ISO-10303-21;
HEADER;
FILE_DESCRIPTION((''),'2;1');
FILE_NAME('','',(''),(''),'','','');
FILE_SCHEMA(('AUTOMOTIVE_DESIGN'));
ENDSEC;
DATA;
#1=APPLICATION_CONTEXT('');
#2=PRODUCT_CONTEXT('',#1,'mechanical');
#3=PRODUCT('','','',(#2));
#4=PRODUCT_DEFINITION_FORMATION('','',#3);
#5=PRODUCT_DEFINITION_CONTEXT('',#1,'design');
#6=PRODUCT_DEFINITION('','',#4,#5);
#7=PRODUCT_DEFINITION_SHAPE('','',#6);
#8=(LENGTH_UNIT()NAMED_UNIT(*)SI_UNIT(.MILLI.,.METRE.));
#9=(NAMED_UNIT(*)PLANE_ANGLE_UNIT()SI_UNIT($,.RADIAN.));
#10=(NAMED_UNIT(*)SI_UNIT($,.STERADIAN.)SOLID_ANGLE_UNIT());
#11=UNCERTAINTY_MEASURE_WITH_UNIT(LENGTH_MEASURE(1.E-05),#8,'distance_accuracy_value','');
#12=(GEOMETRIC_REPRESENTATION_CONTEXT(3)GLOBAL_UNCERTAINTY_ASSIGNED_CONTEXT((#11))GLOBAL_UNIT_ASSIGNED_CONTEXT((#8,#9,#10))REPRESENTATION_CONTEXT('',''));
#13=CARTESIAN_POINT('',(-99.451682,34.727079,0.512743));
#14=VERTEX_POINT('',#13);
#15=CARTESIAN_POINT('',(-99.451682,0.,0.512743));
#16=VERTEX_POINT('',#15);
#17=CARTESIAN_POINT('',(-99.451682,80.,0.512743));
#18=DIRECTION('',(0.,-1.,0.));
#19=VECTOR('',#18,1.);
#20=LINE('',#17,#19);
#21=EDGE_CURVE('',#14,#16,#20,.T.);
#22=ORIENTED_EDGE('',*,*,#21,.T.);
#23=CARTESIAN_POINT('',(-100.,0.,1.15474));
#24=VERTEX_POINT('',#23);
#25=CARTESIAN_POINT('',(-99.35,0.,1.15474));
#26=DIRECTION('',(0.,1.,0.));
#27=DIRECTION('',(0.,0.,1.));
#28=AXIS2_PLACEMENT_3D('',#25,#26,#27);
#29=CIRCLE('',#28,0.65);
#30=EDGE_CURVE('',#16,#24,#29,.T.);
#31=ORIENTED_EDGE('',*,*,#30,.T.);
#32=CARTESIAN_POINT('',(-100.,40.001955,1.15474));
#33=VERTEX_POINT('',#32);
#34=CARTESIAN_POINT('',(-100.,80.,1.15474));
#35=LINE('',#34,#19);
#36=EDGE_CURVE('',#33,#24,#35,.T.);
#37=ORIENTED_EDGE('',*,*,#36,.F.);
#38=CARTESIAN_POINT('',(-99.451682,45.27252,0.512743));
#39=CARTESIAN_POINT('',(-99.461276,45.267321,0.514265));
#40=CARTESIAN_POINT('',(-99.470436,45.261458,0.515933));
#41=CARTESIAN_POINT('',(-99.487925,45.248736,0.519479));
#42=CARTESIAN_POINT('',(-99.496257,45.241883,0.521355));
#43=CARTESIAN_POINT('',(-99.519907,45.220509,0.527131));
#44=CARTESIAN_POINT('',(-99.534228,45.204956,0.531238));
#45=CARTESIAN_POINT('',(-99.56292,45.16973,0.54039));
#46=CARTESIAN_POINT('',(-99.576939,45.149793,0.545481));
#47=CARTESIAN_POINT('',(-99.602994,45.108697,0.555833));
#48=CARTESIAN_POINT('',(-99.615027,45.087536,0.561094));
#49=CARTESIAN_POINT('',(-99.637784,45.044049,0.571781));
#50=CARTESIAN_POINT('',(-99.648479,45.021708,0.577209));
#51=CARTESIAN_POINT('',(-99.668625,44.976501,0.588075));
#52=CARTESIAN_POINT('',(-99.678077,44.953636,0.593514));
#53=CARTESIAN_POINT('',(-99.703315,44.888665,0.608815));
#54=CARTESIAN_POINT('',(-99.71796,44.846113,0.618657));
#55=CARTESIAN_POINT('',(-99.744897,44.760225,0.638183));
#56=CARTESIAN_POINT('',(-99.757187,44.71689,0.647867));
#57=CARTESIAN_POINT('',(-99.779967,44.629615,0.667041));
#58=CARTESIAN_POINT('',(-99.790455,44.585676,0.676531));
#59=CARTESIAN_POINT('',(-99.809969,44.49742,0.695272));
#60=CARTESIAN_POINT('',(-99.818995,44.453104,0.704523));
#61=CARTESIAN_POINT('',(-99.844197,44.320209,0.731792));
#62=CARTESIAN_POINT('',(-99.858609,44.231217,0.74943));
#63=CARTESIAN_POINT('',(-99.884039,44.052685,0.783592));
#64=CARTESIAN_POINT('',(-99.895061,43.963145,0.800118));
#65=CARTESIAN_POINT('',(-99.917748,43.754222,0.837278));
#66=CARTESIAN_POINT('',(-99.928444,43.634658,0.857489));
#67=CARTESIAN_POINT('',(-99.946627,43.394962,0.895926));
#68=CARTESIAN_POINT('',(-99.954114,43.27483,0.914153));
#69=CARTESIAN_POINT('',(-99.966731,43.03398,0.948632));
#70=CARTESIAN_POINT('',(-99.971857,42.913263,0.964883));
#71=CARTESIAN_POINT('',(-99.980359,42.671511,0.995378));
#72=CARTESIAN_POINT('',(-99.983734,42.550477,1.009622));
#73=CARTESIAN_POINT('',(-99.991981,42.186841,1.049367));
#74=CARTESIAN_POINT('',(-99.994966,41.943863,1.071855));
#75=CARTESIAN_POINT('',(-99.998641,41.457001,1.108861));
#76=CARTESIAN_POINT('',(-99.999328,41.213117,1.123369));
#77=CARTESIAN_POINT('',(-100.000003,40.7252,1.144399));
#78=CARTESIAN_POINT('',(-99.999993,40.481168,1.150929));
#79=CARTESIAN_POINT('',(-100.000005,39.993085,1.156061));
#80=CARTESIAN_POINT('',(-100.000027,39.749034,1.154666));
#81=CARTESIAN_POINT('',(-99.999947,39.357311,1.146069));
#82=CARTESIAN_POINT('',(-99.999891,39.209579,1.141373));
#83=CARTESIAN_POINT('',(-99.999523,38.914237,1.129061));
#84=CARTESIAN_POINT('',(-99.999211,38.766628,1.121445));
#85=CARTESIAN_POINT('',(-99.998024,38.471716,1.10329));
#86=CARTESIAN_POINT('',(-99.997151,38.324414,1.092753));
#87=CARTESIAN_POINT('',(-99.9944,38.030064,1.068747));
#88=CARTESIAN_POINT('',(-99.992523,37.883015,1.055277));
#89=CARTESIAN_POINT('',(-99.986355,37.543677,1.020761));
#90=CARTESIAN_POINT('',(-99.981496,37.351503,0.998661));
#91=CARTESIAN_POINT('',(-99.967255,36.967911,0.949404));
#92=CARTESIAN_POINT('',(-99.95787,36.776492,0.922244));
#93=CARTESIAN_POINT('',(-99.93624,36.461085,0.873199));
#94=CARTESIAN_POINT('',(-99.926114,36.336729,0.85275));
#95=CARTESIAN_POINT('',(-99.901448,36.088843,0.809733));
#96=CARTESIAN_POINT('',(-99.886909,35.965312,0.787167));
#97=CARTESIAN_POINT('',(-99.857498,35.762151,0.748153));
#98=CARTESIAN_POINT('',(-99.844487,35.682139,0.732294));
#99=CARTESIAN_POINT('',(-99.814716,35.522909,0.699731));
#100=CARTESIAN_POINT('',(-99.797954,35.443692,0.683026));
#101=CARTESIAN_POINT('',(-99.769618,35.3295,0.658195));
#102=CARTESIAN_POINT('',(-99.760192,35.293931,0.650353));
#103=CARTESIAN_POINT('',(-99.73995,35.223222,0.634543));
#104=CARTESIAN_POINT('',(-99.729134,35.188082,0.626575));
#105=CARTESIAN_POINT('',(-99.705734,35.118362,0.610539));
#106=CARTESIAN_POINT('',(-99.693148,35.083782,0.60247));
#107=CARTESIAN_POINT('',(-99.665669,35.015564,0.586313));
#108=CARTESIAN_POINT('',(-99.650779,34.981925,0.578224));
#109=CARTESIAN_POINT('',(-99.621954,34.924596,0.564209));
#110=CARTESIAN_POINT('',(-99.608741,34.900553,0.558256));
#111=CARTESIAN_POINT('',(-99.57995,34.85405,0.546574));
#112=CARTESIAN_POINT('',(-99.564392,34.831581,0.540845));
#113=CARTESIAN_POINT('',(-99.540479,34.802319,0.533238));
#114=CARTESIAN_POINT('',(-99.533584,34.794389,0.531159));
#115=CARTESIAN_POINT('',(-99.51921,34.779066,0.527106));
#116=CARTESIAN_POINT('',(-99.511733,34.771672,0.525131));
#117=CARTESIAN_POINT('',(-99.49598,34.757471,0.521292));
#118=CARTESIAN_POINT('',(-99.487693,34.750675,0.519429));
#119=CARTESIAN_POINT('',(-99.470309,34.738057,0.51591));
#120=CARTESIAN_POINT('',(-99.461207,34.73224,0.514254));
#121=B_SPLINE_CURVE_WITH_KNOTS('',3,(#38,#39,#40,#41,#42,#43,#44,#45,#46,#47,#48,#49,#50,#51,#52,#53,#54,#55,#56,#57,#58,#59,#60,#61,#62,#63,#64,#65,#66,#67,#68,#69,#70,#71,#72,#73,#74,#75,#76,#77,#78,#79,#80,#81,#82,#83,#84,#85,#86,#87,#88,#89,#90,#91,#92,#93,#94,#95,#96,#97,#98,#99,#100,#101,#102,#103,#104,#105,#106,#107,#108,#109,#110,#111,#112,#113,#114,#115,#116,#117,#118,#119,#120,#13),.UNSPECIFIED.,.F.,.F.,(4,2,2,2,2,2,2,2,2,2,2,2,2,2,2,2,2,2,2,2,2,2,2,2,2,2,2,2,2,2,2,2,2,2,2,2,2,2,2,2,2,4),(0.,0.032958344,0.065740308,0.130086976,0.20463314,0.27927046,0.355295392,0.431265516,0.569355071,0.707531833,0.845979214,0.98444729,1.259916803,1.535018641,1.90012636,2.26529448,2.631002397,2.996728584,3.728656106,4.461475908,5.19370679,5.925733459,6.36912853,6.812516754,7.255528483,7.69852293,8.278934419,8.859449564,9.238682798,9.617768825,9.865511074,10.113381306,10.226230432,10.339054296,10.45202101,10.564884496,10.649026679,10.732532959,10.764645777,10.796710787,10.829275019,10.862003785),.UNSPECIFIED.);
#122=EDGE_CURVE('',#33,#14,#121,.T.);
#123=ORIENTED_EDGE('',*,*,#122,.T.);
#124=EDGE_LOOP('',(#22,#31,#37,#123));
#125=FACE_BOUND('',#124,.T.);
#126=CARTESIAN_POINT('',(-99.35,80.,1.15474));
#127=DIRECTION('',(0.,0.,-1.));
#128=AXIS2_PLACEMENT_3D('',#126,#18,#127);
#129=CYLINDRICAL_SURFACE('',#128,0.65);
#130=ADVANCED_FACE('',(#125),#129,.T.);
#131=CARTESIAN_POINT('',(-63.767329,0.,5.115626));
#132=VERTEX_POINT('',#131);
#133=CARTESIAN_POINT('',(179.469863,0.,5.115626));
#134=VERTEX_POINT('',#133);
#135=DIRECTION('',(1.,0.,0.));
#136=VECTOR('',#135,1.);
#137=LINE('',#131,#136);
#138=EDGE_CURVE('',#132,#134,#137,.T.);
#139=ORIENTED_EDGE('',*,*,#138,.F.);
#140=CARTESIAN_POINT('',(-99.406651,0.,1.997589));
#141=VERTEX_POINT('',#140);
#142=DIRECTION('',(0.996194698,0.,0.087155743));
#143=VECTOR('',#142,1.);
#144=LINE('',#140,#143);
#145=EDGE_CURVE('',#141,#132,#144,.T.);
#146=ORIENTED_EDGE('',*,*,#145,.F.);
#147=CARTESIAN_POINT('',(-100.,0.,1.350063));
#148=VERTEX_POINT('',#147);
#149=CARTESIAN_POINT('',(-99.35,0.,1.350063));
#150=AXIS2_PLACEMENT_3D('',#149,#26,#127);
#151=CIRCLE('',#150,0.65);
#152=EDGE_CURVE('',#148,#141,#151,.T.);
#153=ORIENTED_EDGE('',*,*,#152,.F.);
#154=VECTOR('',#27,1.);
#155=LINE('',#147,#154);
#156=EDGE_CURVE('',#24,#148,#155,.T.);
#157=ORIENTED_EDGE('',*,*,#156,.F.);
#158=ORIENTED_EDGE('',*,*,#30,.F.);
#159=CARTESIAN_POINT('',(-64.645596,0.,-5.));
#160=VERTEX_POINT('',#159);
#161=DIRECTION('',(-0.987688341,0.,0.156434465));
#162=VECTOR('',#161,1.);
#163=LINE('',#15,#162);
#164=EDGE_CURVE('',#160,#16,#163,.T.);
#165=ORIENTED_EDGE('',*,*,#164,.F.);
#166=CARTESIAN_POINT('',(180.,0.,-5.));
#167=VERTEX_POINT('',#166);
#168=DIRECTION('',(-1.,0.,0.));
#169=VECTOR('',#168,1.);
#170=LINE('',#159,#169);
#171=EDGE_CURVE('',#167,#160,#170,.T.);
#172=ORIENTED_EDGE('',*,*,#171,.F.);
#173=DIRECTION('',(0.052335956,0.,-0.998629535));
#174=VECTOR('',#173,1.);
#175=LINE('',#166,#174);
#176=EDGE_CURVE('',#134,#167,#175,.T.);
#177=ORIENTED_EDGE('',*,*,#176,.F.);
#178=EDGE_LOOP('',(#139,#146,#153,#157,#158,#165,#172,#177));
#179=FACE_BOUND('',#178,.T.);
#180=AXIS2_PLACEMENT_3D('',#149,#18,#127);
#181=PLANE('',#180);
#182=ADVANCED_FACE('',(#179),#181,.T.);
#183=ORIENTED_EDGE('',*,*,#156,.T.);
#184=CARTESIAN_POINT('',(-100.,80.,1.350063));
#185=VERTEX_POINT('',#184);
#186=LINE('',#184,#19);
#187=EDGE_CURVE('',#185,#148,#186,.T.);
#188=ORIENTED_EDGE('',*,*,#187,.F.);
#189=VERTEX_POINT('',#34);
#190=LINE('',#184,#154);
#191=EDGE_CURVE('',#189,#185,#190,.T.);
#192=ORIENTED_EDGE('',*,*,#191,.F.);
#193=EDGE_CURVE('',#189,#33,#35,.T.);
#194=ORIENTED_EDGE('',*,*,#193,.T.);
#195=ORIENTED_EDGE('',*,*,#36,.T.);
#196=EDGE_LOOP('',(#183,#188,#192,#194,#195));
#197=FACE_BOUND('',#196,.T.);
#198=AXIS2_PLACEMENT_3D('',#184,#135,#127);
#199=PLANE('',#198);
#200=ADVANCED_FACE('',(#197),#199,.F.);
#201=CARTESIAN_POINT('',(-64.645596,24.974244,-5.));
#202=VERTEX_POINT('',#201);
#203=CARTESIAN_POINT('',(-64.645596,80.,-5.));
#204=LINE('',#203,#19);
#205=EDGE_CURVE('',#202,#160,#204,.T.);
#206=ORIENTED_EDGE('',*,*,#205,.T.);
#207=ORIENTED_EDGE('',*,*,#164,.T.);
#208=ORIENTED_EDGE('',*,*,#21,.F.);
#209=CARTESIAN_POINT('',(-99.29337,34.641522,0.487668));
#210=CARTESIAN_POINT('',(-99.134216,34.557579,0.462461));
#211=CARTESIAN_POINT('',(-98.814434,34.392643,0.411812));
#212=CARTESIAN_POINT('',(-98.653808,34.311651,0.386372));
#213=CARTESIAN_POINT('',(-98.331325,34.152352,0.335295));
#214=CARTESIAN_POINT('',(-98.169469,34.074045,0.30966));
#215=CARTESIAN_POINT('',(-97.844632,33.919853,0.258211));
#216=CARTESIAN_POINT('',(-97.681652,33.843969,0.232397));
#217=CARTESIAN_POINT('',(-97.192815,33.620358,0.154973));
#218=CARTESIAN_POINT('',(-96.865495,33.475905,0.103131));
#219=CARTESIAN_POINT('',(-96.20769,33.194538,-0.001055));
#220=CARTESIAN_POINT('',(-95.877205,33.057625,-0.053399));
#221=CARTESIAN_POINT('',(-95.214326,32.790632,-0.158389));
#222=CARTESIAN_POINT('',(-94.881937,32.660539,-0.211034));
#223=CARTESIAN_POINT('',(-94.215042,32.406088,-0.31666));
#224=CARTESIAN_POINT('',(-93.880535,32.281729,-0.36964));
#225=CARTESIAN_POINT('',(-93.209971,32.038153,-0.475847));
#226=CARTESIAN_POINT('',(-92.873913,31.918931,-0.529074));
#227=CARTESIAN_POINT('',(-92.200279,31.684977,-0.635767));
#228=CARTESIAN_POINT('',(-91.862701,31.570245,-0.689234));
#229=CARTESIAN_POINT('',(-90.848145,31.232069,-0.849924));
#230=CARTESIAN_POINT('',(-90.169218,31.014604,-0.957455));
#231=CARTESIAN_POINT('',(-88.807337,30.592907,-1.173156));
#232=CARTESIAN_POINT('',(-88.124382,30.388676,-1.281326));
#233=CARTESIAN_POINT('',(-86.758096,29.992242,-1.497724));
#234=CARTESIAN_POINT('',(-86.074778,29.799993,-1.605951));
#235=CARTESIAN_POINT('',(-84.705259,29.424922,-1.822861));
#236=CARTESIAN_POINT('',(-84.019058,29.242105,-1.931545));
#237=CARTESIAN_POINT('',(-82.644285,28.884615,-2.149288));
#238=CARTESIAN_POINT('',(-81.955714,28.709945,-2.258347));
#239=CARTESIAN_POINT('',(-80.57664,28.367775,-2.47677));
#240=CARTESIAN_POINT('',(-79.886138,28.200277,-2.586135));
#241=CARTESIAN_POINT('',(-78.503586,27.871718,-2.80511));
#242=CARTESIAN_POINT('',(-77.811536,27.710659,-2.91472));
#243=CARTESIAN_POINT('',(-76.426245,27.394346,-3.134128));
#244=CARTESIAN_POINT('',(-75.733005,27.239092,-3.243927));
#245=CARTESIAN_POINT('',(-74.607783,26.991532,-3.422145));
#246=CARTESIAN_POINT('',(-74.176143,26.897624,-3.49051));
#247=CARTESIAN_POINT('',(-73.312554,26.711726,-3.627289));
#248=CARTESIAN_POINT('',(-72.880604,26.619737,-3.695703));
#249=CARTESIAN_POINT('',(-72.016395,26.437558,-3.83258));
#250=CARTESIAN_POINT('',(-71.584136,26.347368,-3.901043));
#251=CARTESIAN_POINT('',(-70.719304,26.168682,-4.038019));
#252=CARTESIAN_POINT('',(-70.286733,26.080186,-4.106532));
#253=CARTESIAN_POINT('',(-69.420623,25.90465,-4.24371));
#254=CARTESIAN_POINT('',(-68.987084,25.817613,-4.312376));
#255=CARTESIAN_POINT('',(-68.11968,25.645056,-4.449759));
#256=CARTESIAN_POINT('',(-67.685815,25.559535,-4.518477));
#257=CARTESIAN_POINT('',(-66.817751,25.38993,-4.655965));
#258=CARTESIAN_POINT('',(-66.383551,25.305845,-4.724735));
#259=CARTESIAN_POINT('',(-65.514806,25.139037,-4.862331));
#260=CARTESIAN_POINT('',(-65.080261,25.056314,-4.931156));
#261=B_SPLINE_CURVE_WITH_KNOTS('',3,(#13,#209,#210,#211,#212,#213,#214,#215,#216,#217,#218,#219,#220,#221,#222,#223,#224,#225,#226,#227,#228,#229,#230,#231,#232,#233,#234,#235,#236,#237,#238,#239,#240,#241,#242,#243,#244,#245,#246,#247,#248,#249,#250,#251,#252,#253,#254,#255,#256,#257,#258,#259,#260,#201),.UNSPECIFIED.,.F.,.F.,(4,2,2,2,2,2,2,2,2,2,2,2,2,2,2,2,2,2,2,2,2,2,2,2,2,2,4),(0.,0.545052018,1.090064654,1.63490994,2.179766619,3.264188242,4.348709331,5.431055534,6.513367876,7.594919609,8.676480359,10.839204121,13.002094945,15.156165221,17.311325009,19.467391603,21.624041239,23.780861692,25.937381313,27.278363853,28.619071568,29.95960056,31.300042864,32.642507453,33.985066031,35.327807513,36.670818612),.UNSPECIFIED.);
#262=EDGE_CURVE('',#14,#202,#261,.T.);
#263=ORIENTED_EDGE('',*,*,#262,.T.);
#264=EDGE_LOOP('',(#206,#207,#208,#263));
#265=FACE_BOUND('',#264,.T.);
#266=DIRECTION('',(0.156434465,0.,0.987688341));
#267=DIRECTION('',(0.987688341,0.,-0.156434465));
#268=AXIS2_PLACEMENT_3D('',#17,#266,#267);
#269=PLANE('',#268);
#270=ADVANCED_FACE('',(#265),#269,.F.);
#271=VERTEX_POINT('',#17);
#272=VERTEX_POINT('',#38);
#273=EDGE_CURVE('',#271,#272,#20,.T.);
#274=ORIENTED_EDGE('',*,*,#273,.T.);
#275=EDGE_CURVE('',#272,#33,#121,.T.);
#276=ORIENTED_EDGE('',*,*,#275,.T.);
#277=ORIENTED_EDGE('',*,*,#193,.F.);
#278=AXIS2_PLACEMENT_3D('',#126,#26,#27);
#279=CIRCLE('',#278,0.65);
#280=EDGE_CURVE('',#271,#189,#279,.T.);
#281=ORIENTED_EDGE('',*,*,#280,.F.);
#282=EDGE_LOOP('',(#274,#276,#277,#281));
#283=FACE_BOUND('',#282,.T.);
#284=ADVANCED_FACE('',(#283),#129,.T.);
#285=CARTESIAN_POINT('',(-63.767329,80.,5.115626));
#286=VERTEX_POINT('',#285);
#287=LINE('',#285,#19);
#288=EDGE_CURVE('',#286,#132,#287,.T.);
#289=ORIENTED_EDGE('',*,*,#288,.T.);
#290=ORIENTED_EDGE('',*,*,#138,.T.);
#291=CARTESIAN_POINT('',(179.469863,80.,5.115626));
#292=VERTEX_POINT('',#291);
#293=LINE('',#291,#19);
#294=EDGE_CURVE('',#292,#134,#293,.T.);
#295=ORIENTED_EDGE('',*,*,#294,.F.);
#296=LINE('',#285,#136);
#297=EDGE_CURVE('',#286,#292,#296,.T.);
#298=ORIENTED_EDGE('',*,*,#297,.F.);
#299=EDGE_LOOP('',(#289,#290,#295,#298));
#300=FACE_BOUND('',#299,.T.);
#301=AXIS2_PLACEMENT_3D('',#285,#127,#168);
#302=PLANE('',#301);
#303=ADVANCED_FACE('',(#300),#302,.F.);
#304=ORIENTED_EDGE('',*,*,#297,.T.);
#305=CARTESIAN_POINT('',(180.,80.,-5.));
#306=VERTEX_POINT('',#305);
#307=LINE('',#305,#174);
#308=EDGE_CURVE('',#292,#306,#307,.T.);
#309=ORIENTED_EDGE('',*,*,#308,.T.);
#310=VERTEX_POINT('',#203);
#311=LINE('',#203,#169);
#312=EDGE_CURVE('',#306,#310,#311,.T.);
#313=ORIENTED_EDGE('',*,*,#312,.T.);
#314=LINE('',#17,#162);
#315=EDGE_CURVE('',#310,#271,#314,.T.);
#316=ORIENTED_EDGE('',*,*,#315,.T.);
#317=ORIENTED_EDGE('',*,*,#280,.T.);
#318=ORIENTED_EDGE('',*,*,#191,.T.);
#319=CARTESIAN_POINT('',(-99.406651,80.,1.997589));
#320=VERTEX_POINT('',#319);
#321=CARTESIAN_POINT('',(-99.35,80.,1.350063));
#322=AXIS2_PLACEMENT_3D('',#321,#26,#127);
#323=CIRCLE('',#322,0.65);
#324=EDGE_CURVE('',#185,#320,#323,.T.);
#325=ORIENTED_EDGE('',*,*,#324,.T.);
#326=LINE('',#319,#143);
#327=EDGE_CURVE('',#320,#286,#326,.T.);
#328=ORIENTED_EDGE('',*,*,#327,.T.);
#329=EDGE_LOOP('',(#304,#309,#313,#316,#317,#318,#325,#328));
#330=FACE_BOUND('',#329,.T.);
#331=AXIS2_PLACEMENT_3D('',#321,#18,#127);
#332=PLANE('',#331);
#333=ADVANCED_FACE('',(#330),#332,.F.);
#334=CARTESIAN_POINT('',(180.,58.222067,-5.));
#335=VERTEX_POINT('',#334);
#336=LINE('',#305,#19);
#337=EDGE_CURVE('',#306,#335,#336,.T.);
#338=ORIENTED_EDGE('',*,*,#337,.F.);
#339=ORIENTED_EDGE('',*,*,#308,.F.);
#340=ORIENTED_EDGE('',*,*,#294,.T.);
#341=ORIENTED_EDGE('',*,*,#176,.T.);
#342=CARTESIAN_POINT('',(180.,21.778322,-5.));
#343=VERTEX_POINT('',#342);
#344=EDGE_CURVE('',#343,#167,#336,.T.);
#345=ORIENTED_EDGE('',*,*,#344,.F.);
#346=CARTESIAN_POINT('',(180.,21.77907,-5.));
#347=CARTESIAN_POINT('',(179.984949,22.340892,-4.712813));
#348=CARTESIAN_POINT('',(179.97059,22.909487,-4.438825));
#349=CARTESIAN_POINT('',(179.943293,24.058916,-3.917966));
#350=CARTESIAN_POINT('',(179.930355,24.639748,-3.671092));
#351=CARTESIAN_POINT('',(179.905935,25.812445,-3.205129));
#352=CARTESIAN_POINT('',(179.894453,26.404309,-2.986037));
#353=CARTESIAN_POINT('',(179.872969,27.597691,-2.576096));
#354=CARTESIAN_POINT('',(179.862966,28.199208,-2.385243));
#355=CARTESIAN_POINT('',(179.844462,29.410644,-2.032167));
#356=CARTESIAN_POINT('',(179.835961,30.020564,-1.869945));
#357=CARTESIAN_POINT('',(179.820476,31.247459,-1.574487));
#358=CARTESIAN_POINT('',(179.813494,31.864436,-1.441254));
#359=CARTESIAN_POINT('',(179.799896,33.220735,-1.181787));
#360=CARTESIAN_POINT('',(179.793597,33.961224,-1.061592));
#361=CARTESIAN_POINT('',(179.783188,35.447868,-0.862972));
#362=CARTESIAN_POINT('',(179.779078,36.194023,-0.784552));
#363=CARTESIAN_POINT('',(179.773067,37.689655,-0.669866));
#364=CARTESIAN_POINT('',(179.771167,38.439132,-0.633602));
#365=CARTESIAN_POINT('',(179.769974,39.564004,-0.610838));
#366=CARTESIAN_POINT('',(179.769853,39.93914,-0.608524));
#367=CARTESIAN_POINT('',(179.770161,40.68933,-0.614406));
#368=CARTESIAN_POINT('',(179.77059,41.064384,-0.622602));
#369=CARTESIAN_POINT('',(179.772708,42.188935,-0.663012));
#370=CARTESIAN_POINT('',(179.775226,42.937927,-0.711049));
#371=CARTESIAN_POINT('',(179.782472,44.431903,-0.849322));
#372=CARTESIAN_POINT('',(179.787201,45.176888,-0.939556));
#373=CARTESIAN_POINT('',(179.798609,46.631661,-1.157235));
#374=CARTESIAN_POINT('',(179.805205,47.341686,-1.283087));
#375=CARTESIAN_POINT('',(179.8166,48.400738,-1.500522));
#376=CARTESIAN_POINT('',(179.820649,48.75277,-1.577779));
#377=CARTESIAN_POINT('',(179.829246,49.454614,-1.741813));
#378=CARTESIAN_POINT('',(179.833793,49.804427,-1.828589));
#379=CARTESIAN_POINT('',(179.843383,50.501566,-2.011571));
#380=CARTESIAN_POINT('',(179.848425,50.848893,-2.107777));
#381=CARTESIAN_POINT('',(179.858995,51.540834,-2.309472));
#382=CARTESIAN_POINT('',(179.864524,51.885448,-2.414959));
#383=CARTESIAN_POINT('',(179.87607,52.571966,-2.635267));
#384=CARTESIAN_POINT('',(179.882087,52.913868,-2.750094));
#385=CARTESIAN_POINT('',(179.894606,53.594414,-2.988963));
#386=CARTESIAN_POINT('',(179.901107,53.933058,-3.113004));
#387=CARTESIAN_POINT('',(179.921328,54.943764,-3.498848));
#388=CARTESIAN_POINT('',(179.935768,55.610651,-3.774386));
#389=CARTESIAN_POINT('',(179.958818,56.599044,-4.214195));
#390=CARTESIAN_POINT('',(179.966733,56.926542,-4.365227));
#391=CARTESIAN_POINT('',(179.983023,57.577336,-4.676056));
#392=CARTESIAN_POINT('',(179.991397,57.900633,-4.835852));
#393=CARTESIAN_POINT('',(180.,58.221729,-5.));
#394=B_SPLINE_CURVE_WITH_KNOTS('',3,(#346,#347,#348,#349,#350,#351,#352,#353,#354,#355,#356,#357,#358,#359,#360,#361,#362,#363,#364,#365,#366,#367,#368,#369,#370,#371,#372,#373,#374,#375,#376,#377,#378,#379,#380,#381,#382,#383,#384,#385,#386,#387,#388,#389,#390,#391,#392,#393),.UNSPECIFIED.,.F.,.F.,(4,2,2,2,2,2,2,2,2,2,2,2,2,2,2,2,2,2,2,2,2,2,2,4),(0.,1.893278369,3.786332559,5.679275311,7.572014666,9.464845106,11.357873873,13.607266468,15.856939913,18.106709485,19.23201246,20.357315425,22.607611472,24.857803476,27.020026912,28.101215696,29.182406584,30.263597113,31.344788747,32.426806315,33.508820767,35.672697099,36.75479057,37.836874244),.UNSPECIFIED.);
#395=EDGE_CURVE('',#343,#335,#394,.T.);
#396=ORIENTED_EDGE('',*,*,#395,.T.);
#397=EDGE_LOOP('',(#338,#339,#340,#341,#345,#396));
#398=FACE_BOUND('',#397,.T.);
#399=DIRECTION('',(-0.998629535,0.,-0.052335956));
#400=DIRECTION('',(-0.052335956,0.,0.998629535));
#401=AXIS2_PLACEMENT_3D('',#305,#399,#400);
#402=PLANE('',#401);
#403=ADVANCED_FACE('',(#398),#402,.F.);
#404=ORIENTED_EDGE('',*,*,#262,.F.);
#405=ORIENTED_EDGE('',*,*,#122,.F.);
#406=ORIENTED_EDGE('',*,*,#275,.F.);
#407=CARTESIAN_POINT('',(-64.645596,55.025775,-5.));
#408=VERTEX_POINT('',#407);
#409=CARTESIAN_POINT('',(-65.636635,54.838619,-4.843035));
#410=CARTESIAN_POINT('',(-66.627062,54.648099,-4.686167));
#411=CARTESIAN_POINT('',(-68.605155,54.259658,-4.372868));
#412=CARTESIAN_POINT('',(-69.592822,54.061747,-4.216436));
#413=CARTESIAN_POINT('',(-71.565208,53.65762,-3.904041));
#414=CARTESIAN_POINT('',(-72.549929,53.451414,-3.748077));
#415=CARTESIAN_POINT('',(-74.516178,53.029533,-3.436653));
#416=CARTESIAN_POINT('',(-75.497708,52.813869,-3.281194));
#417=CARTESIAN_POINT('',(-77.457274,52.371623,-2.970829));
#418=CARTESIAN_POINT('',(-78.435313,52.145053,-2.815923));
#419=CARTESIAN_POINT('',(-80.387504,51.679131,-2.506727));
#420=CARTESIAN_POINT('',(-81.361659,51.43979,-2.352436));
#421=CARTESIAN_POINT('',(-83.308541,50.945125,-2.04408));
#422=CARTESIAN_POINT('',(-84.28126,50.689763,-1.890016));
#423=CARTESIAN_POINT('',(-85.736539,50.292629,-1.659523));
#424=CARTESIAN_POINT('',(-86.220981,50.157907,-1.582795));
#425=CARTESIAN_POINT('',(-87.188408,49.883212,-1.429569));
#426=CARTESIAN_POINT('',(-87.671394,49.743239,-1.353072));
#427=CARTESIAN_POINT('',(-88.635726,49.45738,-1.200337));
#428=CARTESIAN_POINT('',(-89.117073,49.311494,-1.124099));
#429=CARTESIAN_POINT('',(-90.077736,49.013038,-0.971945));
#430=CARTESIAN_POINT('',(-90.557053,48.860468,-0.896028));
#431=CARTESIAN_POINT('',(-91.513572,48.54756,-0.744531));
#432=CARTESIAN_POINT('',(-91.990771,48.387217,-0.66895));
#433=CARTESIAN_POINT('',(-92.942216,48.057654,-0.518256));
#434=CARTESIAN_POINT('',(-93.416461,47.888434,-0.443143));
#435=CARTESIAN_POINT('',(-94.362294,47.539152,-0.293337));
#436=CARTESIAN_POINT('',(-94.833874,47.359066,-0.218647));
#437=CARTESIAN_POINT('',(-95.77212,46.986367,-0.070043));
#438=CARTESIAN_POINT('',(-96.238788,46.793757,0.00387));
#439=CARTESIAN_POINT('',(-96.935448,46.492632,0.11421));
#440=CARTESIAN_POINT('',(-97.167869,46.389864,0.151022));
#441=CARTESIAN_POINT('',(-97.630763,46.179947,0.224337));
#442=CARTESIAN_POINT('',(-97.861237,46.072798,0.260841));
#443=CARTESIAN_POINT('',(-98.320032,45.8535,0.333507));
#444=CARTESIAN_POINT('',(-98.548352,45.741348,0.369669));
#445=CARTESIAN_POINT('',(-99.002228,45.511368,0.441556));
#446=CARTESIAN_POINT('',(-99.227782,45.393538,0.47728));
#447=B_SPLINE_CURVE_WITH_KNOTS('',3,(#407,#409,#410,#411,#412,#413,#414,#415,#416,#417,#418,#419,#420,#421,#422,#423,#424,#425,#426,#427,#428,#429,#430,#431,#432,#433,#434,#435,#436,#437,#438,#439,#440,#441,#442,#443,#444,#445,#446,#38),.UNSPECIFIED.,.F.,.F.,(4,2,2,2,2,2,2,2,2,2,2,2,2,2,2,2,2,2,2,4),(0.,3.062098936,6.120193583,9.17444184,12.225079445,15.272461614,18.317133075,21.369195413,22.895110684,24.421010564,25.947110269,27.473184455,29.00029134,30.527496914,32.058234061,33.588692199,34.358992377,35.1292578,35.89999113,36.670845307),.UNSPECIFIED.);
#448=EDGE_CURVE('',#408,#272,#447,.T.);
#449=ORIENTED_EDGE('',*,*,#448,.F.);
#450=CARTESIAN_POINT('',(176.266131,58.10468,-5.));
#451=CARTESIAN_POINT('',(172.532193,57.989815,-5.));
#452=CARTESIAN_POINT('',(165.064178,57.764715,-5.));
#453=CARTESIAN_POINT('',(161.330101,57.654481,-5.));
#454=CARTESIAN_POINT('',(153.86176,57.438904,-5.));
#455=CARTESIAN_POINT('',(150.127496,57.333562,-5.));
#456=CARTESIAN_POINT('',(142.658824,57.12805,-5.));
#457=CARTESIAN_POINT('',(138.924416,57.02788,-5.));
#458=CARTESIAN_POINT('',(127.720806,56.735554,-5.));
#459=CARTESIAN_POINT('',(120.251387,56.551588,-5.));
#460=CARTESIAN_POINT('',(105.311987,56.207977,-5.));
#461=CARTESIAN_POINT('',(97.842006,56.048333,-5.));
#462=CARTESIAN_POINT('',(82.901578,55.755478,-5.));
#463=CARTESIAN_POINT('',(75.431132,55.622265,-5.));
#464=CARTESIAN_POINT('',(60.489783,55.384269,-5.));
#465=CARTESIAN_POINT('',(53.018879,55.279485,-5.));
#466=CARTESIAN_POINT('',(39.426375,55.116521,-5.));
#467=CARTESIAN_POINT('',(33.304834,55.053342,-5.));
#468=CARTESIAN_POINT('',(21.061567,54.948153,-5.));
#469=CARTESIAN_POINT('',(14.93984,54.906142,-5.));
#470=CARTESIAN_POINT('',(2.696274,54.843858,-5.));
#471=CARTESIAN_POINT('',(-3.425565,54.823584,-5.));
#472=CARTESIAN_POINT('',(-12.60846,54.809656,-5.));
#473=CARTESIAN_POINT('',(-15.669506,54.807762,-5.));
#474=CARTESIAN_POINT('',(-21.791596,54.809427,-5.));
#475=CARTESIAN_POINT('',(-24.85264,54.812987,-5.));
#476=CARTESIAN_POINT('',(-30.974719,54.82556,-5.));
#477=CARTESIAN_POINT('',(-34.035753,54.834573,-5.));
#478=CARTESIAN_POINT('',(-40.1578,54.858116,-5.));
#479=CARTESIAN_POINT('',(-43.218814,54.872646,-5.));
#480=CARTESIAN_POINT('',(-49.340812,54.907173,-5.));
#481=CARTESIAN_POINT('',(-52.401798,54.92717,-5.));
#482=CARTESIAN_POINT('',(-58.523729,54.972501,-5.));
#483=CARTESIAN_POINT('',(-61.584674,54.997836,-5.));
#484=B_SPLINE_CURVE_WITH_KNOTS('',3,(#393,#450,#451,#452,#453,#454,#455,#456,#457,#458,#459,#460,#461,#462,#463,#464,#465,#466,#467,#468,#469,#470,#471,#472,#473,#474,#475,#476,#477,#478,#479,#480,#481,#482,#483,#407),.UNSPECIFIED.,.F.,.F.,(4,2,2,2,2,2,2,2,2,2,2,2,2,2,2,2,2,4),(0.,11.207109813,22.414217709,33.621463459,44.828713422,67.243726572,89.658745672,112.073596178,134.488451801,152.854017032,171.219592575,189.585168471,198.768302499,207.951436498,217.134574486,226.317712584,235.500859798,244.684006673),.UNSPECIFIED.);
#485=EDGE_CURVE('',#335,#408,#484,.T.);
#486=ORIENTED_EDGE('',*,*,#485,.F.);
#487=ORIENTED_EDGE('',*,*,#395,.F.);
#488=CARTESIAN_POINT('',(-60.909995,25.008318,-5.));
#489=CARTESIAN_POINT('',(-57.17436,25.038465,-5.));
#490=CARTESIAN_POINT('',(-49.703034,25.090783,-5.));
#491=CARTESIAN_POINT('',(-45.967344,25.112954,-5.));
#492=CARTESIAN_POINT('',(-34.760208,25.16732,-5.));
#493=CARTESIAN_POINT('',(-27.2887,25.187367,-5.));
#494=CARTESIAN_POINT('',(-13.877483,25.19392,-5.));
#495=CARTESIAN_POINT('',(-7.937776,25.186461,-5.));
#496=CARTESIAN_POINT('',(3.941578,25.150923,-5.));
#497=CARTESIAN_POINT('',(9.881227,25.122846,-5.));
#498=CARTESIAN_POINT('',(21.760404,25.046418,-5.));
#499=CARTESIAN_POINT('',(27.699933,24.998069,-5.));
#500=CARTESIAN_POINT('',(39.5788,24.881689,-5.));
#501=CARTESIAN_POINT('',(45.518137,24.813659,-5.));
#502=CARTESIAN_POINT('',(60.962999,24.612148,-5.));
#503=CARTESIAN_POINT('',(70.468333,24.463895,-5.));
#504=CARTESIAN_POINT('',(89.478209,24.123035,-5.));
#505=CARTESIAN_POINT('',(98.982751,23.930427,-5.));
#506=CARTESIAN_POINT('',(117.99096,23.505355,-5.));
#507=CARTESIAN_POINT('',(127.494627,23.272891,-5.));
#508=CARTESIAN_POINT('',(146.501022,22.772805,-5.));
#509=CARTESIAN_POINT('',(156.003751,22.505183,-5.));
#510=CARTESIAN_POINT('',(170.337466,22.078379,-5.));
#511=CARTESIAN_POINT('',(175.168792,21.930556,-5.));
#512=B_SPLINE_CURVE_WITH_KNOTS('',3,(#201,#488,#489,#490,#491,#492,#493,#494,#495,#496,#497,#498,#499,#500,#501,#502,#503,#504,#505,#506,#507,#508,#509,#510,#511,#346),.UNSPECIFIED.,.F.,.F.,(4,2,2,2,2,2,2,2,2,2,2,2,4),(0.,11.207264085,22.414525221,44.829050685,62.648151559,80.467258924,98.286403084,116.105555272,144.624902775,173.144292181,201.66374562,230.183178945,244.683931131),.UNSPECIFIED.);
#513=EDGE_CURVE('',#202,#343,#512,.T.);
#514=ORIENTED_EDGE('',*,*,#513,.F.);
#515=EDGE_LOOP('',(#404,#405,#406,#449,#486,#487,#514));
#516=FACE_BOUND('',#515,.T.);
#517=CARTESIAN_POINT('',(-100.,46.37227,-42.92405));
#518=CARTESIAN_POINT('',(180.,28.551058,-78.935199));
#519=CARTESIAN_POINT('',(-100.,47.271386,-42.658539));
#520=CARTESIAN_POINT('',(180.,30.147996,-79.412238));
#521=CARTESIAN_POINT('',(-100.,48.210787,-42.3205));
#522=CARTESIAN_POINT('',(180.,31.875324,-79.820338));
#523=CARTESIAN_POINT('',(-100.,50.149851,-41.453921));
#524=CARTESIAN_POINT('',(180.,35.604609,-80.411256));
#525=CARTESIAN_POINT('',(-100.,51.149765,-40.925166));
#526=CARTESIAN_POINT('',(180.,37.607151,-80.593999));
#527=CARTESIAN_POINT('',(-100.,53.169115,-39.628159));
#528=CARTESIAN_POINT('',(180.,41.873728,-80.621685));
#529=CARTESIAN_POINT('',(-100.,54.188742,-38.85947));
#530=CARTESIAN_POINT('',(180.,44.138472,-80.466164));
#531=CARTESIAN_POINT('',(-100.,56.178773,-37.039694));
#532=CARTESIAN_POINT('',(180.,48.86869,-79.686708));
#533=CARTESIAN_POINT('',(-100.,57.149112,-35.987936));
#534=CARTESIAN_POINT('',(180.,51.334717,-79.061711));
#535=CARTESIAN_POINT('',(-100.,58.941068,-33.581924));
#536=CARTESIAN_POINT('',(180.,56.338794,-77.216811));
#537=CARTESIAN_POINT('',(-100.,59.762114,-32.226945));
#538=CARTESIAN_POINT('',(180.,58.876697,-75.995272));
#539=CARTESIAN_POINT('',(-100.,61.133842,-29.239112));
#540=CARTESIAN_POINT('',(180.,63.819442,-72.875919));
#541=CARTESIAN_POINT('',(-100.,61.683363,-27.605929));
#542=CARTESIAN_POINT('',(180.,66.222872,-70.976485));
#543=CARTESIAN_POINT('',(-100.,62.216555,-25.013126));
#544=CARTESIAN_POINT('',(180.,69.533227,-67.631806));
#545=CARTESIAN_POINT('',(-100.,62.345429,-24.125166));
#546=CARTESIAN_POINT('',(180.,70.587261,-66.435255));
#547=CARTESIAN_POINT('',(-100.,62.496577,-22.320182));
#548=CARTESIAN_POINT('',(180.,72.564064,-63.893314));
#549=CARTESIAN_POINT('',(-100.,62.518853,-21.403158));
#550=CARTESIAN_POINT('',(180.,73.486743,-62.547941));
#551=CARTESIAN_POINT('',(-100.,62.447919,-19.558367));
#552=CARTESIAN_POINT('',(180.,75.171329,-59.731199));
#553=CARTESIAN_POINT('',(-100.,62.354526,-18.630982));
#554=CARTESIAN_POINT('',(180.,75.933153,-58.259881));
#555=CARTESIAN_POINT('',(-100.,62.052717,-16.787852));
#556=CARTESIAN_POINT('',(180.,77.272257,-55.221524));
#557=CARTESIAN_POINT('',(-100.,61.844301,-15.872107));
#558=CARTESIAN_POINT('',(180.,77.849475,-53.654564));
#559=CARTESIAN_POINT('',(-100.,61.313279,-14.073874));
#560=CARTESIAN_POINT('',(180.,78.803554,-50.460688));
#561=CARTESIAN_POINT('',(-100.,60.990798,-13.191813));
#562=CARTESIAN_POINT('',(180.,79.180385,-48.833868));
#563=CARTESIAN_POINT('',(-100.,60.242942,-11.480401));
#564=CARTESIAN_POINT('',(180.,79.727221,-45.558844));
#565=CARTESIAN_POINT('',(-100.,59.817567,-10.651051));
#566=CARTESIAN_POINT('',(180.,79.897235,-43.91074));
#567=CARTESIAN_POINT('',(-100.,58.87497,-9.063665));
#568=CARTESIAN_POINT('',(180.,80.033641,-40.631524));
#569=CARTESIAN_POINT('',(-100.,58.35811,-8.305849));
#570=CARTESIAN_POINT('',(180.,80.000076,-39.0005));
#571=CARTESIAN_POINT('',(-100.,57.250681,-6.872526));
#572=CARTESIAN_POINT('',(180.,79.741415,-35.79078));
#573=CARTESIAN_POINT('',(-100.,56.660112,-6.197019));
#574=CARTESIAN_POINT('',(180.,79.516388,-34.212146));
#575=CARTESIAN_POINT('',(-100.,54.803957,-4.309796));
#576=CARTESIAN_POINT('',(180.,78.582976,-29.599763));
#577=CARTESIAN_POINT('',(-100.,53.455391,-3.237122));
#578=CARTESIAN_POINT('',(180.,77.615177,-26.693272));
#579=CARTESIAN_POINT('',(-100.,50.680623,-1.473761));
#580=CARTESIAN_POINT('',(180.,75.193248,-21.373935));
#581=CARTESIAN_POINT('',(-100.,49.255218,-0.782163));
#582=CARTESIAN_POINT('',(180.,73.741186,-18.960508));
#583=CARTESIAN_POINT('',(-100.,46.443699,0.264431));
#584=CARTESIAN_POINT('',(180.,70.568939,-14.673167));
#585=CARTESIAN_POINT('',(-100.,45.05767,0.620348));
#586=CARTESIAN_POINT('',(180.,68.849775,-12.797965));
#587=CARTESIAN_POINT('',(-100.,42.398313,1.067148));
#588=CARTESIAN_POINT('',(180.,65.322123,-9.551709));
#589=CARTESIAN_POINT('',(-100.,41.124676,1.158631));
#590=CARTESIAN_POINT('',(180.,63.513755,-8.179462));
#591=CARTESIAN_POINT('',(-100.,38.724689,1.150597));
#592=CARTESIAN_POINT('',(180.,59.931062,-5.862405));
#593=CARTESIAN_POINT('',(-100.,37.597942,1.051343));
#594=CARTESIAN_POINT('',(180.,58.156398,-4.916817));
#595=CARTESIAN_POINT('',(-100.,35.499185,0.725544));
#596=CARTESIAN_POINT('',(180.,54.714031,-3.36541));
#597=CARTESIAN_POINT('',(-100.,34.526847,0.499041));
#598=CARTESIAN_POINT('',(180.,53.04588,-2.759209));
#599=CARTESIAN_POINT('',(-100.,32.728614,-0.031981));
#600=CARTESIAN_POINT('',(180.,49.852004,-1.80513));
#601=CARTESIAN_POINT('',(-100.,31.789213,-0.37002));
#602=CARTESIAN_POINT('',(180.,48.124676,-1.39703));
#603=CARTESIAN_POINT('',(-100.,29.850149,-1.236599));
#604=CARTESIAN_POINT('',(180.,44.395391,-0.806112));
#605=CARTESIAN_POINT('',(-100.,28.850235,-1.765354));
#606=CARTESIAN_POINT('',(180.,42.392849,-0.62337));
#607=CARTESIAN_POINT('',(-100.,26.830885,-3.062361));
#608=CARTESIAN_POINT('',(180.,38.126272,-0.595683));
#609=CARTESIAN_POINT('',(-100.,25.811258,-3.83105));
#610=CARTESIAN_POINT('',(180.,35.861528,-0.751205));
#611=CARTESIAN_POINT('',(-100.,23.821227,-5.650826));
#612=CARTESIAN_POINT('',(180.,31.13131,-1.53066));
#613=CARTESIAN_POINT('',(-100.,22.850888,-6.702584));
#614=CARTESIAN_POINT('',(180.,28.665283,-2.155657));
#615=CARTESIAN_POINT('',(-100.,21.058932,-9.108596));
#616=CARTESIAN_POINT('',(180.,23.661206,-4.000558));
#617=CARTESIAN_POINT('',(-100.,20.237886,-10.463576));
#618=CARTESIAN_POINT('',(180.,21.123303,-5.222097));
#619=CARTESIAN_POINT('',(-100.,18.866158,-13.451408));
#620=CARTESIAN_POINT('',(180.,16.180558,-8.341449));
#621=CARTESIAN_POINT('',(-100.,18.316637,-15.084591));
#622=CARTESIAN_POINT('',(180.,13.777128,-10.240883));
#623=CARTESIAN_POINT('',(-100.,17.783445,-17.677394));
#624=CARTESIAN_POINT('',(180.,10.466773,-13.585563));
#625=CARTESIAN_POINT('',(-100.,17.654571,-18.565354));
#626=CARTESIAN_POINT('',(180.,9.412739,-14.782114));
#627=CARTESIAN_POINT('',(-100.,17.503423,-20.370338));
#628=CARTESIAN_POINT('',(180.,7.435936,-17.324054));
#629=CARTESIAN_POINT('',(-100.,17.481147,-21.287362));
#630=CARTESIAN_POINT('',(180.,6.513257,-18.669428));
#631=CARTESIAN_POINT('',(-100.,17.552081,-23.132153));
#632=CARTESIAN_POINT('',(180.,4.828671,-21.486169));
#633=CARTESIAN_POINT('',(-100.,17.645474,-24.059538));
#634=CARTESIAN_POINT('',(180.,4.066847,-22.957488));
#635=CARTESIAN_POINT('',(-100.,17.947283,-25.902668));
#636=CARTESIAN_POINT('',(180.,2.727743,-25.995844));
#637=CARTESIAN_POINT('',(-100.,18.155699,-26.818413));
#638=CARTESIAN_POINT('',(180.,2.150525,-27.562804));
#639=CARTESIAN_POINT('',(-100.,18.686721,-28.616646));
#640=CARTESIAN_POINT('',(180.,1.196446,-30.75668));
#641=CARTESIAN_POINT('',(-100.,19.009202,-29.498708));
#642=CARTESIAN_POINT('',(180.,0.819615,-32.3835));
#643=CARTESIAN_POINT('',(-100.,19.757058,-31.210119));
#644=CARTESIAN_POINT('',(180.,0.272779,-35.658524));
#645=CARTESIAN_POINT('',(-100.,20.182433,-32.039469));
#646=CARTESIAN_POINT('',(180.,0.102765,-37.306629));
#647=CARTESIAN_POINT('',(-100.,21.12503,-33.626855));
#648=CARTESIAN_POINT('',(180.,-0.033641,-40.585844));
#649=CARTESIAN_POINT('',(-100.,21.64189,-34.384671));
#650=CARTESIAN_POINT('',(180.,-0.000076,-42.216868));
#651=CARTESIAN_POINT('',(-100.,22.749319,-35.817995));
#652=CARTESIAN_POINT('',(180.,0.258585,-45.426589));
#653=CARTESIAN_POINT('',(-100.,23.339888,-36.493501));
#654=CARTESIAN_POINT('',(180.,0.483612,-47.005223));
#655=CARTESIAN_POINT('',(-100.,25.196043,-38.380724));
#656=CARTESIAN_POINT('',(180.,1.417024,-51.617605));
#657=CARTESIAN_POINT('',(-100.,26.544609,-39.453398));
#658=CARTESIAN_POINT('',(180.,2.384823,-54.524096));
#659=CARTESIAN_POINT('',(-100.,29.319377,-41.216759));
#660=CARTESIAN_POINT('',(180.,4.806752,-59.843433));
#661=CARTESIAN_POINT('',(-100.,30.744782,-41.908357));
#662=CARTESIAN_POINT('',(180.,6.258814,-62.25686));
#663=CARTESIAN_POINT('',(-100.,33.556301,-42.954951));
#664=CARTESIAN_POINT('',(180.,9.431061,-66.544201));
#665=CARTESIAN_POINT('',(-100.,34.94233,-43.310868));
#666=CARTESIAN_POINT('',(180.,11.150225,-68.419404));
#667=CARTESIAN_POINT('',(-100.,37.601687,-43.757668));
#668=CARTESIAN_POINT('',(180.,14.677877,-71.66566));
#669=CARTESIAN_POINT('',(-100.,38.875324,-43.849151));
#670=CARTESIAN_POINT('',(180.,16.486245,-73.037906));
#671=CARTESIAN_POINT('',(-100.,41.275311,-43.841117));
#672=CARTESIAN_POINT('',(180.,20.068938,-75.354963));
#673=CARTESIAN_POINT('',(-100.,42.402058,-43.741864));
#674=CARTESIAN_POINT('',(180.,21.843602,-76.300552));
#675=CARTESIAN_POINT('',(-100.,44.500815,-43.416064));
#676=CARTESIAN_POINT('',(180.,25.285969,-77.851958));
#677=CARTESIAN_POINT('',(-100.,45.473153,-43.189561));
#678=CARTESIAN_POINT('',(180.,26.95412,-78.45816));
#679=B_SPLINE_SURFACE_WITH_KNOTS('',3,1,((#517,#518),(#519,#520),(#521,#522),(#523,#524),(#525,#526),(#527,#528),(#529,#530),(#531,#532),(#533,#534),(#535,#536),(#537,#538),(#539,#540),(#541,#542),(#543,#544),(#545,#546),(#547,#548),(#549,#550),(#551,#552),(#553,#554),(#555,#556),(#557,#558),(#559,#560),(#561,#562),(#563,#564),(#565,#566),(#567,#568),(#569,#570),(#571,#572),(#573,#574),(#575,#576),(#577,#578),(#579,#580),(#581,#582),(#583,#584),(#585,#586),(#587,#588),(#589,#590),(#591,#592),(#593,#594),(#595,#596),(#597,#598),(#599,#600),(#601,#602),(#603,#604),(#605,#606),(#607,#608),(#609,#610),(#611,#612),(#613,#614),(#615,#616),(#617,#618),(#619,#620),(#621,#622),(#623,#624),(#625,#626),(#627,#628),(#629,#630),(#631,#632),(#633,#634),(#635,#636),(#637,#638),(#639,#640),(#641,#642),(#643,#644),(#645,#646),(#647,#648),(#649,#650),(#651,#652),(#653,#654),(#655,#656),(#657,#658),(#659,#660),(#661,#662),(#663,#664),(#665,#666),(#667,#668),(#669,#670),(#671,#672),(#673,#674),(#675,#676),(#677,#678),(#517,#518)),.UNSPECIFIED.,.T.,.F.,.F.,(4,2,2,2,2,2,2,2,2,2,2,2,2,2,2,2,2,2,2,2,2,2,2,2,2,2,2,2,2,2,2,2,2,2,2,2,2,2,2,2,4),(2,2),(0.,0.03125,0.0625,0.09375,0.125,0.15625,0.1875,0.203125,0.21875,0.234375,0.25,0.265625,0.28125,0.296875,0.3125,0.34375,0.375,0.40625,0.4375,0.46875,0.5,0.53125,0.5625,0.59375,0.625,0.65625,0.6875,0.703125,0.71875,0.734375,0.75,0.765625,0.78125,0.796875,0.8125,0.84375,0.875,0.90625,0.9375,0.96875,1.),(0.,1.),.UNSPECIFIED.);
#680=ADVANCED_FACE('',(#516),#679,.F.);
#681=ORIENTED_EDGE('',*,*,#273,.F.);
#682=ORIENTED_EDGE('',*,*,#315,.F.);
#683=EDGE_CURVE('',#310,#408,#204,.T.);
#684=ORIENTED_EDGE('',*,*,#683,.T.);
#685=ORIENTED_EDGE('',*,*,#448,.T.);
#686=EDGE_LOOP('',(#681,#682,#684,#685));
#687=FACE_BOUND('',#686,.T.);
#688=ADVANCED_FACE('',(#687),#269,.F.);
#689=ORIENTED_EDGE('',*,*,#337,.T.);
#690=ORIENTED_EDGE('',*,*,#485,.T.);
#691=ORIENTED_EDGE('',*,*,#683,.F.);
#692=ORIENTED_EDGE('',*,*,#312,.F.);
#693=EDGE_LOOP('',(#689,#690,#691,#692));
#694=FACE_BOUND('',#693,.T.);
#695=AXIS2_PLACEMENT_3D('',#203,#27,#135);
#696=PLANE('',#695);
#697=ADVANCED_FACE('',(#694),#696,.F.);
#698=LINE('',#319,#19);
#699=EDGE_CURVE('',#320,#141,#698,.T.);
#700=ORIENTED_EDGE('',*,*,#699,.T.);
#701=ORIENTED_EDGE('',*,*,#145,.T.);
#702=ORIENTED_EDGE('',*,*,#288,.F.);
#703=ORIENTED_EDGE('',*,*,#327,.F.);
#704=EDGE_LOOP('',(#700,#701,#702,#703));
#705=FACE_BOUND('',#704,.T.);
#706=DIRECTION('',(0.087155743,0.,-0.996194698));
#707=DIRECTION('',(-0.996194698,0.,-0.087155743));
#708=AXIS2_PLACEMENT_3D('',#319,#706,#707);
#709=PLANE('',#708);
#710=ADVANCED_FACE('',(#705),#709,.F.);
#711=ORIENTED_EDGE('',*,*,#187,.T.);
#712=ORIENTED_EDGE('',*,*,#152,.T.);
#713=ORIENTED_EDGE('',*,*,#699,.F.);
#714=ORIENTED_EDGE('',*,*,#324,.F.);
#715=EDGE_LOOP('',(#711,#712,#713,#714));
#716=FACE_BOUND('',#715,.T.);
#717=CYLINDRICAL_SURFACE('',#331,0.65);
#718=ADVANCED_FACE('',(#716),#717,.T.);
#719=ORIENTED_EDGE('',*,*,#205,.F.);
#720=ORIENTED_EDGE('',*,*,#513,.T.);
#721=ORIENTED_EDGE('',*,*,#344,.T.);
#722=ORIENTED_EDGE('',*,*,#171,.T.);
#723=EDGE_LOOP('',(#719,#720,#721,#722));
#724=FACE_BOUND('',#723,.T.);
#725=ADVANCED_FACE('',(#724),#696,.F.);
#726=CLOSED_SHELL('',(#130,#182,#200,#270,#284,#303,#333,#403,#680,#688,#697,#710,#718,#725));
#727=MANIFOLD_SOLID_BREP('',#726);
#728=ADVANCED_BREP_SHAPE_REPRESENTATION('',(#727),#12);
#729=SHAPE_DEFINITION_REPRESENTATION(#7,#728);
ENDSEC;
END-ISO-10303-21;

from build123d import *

# Parameters (mm, degrees)
BOSS_EXTRUDE1_DEPTH = 80


with BuildPart() as part:
    # Sketch1 → Boss-Extrude1 (new body)
    with BuildSketch(Plane(origin=(0, 0, 0), x_dir=(1, 0, 0), z_dir=(0, 1, 0))):
        with BuildLine():
            Line((180, 5), (179.469862502, -5.115626071))
            Line((179.469862502, -5.115626071), (-63.767328769, -5.115626071))
            Line((-63.767328769, -5.115626071), (-99.406651233, -1.997589379))
            ThreePointArc((-99.406651233, -1.997589379), (-99.829230269, -1.789196461), (-100, -1.350062826))
            Line((-100, -1.350062826), (-100, -1.154739941))
            ThreePointArc((-100, -1.154739941), (-99.844263878, -0.732598709), (-99.451682402, -0.512742519))
            Line((-99.451682402, -0.512742519), (-64.645595971, 5))
            Line((-64.645595971, 5), (180, 5))
        make_face()
    extrude(amount=BOSS_EXTRUDE1_DEPTH)

    # Cut-Loft2: read off the stored shape, not the designer's step
    # Cut-Loft2: loft between two sections, ruled curve by curve
    cut_loft2_from = [
        Edge.make_bspline([(-100, 46.372269689, -42.924050086), (-100, 47.27138594, -42.658538849), (-100, 48.210787476, -42.320500231), (-100, 50.149850676, -41.453921439), (-100, 51.149765287, -40.925166444), (-100, 53.169114931, -39.628159499), (-100, 54.18874158, -38.859470423), (-100, 56.178772716, -37.039694285), (-100, 57.149111753, -35.987936251), (-100, 58.941067781, -33.581924282), (-100, 59.762113682, -32.226944596), (-100, 61.133842388, -29.23911219), (-100, 61.683362519, -27.605929091), (-100, 62.216554733, -25.013126268), (-100, 62.345428507, -24.125166051), (-100, 62.496577402, -22.320181761), (-100, 62.518852521, -21.403157688), (-100, 62.447919377, -19.558367046), (-100, 62.354526015, -18.630982172), (-100, 62.052716958, -16.78785196), (-100, 61.844301264, -15.872106621), (-100, 61.313278789, -14.073874119), (-100, 60.990797696, -13.191812573), (-100, 60.242941855, -11.480401071), (-100, 59.817567108, -10.651051116), (-100, 58.87497002, -9.063664977), (-100, 58.358110433, -8.305848706), (-100, 57.250681403, -6.872525569), (-100, 56.660111959, -6.197018701), (-100, 54.80395718, -4.309795913), (-100, 53.45539094, -3.237122381), (-100, 50.680622933, -1.473760637), (-100, 49.255217853, -0.782163442), (-100, 46.443698676, 0.264430993), (-100, 45.057669802, 0.620347796), (-100, 42.398313027, 1.067148265), (-100, 41.124675582, 1.158630823), (-100, 38.724689029, 1.150596935), (-100, 37.597941582, 1.051343402), (-100, 35.499184882, 0.725544061), (-100, 34.526846562, 0.499041204), (-100, 32.72861406, -0.03198127), (-100, 31.789212524, -0.370019888), (-100, 29.850149324, -1.23659868), (-100, 28.850234713, -1.765353674), (-100, 26.830885069, -3.062360619), (-100, 25.81125842, -3.831049696), (-100, 23.821227284, -5.650825833), (-100, 22.850888247, -6.702583867), (-100, 21.058932219, -9.108595836), (-100, 20.237886318, -10.463575522), (-100, 18.866157612, -13.451407929), (-100, 18.316637481, -15.084591028), (-100, 17.783445267, -17.677393851), (-100, 17.654571493, -18.565354067), (-100, 17.503422598, -20.370338357), (-100, 17.481147479, -21.287362431), (-100, 17.552080623, -23.132153073), (-100, 17.645473985, -24.059537946), (-100, 17.947283042, -25.902668159), (-100, 18.155698736, -26.818413497), (-100, 18.686721211, -28.616646), (-100, 19.009202304, -29.498707546), (-100, 19.757058145, -31.210119048), (-100, 20.182432892, -32.039469003), (-100, 21.12502998, -33.626855142), (-100, 21.641889567, -34.384671412), (-100, 22.749318597, -35.81799455), (-100, 23.339888041, -36.493501417), (-100, 25.19604282, -38.380724205), (-100, 26.54460906, -39.453397738), (-100, 29.319377067, -41.216759482), (-100, 30.744782147, -41.908356676), (-100, 33.556301324, -42.954951112), (-100, 34.942330198, -43.310867915), (-100, 37.601686973, -43.757668384), (-100, 38.875324418, -43.849150941), (-100, 41.275310971, -43.841117054), (-100, 42.402058418, -43.74186352), (-100, 44.500815118, -43.416064179), (-100, 45.473153438, -43.189561323), (-100, 46.372269689, -42.924050086)], [0, 0, 0, 0, 0.03125, 0.03125, 0.0625, 0.0625, 0.09375, 0.09375, 0.125, 0.125, 0.15625, 0.15625, 0.1875, 0.1875, 0.203125, 0.203125, 0.21875, 0.21875, 0.234375, 0.234375, 0.25, 0.25, 0.265625, 0.265625, 0.28125, 0.28125, 0.296875, 0.296875, 0.3125, 0.3125, 0.34375, 0.34375, 0.375, 0.375, 0.40625, 0.40625, 0.4375, 0.4375, 0.46875, 0.46875, 0.5, 0.5, 0.53125, 0.53125, 0.5625, 0.5625, 0.59375, 0.59375, 0.625, 0.625, 0.65625, 0.65625, 0.6875, 0.6875, 0.703125, 0.703125, 0.71875, 0.71875, 0.734375, 0.734375, 0.75, 0.75, 0.765625, 0.765625, 0.78125, 0.78125, 0.796875, 0.796875, 0.8125, 0.8125, 0.84375, 0.84375, 0.875, 0.875, 0.90625, 0.90625, 0.9375, 0.9375, 0.96875, 0.96875, 1, 1, 1, 1], 3),
    ]
    cut_loft2_to = [
        Edge.make_bspline([(180, 28.551057955, -78.935198824), (180, 30.147996066, -79.412238075), (180, 31.875323965, -79.820338386), (180, 35.604608971, -80.411256005), (180, 37.607151324, -80.593998796), (180, 41.873728161, -80.621685223), (180, 44.138472267, -80.46616369), (180, 48.868689715, -79.68670829), (180, 51.334716697, -79.061711462), (180, 56.338793625, -77.216810774), (180, 58.876697195, -75.995271668), (180, 63.819442208, -72.875919018), (180, 66.222872399, -70.976485062), (180, 69.533227056, -67.631805591), (180, 70.587261439, -66.435254593), (180, 72.564064486, -63.89331443), (180, 73.486743413, -62.547940775), (180, 75.171328923, -59.731199346), (180, 75.933152653, -58.259880816), (180, 77.272256632, -55.221524011), (180, 77.849475409, -53.654564318), (180, 78.803553913, -50.460688096), (180, 79.18038475, -48.83386828), (180, 79.727221351, -45.558844421), (180, 79.897235414, -43.910739803), (180, 80.033641397, -40.631524344), (180, 80.000075583, -39.000500123), (180, 79.741415418, -35.790779731), (180, 79.516387593, -34.212145749), (180, 78.582975921, -29.599763352), (180, 77.615177464, -26.693271965), (180, 75.193247864, -21.373934955), (180, 73.741185532, -18.960508489), (180, 70.568939332, -14.673166832), (180, 68.849774783, -12.797964612), (180, 65.322122641, -9.551708587), (180, 63.513755151, -8.179462312), (180, 59.931061785, -5.862405409), (180, 58.156397702, -4.916816601), (180, 54.714031128, -3.36540993), (180, 53.045880155, -2.759208753), (180, 49.852003934, -1.80513025), (180, 48.124676035, -1.39702994), (180, 44.395391029, -0.80611232), (180, 42.392848676, -0.623369529), (180, 38.126271839, -0.595683102), (180, 35.861527733, -0.751204636), (180, 31.131310285, -1.530660035), (180, 28.665283303, -2.155656863), (180, 23.661206375, -4.000557551), (180, 21.123302805, -5.222096657), (180, 16.180557792, -8.341449307), (180, 13.777127601, -10.240883263), (180, 10.466772944, -13.585562734), (180, 9.412738561, -14.782113732), (180, 7.435935514, -17.324053895), (180, 6.513256587, -18.66942755), (180, 4.828671077, -21.486168979), (180, 4.066847347, -22.957487509), (180, 2.727743368, -25.995844314), (180, 2.150524591, -27.562804007), (180, 1.196446087, -30.756680229), (180, 0.81961525, -32.383500046), (180, 0.272778649, -35.658523904), (180, 0.102764586, -37.306628522), (180, -0.033641397, -40.585843981), (180, -7.5583e-05, -42.216868202), (180, 0.258584582, -45.426588594), (180, 0.483612407, -47.005222577), (180, 1.417024079, -51.617604973), (180, 2.384822536, -54.52409636), (180, 4.806752136, -59.84343337), (180, 6.258814468, -62.256859836), (180, 9.431060668, -66.544201493), (180, 11.150225217, -68.419403713), (180, 14.677877359, -71.665659739), (180, 16.486244849, -73.037906013), (180, 20.068938215, -75.354962916), (180, 21.843602298, -76.300551724), (180, 25.285968872, -77.851958395), (180, 26.954119845, -78.458159572), (180, 28.551057955, -78.935198824)], [0, 0, 0, 0, 0.03125, 0.03125, 0.0625, 0.0625, 0.09375, 0.09375, 0.125, 0.125, 0.15625, 0.15625, 0.1875, 0.1875, 0.203125, 0.203125, 0.21875, 0.21875, 0.234375, 0.234375, 0.25, 0.25, 0.265625, 0.265625, 0.28125, 0.28125, 0.296875, 0.296875, 0.3125, 0.3125, 0.34375, 0.34375, 0.375, 0.375, 0.40625, 0.40625, 0.4375, 0.4375, 0.46875, 0.46875, 0.5, 0.5, 0.53125, 0.53125, 0.5625, 0.5625, 0.59375, 0.59375, 0.625, 0.625, 0.65625, 0.65625, 0.6875, 0.6875, 0.703125, 0.703125, 0.71875, 0.71875, 0.734375, 0.734375, 0.75, 0.75, 0.765625, 0.765625, 0.78125, 0.78125, 0.796875, 0.796875, 0.8125, 0.8125, 0.84375, 0.84375, 0.875, 0.875, 0.90625, 0.90625, 0.9375, 0.9375, 0.96875, 0.96875, 1, 1, 1, 1], 3),
    ]
    cut_loft2 = Solid(Shell([*[Face.make_surface_from_curves(cut_loft2_from[k], cut_loft2_to[k]) for k in range(1)], Face(Wire(cut_loft2_from)), Face(Wire(cut_loft2_to))]))
    add(cut_loft2, mode=Mode.SUBTRACT)


solid = part.part
